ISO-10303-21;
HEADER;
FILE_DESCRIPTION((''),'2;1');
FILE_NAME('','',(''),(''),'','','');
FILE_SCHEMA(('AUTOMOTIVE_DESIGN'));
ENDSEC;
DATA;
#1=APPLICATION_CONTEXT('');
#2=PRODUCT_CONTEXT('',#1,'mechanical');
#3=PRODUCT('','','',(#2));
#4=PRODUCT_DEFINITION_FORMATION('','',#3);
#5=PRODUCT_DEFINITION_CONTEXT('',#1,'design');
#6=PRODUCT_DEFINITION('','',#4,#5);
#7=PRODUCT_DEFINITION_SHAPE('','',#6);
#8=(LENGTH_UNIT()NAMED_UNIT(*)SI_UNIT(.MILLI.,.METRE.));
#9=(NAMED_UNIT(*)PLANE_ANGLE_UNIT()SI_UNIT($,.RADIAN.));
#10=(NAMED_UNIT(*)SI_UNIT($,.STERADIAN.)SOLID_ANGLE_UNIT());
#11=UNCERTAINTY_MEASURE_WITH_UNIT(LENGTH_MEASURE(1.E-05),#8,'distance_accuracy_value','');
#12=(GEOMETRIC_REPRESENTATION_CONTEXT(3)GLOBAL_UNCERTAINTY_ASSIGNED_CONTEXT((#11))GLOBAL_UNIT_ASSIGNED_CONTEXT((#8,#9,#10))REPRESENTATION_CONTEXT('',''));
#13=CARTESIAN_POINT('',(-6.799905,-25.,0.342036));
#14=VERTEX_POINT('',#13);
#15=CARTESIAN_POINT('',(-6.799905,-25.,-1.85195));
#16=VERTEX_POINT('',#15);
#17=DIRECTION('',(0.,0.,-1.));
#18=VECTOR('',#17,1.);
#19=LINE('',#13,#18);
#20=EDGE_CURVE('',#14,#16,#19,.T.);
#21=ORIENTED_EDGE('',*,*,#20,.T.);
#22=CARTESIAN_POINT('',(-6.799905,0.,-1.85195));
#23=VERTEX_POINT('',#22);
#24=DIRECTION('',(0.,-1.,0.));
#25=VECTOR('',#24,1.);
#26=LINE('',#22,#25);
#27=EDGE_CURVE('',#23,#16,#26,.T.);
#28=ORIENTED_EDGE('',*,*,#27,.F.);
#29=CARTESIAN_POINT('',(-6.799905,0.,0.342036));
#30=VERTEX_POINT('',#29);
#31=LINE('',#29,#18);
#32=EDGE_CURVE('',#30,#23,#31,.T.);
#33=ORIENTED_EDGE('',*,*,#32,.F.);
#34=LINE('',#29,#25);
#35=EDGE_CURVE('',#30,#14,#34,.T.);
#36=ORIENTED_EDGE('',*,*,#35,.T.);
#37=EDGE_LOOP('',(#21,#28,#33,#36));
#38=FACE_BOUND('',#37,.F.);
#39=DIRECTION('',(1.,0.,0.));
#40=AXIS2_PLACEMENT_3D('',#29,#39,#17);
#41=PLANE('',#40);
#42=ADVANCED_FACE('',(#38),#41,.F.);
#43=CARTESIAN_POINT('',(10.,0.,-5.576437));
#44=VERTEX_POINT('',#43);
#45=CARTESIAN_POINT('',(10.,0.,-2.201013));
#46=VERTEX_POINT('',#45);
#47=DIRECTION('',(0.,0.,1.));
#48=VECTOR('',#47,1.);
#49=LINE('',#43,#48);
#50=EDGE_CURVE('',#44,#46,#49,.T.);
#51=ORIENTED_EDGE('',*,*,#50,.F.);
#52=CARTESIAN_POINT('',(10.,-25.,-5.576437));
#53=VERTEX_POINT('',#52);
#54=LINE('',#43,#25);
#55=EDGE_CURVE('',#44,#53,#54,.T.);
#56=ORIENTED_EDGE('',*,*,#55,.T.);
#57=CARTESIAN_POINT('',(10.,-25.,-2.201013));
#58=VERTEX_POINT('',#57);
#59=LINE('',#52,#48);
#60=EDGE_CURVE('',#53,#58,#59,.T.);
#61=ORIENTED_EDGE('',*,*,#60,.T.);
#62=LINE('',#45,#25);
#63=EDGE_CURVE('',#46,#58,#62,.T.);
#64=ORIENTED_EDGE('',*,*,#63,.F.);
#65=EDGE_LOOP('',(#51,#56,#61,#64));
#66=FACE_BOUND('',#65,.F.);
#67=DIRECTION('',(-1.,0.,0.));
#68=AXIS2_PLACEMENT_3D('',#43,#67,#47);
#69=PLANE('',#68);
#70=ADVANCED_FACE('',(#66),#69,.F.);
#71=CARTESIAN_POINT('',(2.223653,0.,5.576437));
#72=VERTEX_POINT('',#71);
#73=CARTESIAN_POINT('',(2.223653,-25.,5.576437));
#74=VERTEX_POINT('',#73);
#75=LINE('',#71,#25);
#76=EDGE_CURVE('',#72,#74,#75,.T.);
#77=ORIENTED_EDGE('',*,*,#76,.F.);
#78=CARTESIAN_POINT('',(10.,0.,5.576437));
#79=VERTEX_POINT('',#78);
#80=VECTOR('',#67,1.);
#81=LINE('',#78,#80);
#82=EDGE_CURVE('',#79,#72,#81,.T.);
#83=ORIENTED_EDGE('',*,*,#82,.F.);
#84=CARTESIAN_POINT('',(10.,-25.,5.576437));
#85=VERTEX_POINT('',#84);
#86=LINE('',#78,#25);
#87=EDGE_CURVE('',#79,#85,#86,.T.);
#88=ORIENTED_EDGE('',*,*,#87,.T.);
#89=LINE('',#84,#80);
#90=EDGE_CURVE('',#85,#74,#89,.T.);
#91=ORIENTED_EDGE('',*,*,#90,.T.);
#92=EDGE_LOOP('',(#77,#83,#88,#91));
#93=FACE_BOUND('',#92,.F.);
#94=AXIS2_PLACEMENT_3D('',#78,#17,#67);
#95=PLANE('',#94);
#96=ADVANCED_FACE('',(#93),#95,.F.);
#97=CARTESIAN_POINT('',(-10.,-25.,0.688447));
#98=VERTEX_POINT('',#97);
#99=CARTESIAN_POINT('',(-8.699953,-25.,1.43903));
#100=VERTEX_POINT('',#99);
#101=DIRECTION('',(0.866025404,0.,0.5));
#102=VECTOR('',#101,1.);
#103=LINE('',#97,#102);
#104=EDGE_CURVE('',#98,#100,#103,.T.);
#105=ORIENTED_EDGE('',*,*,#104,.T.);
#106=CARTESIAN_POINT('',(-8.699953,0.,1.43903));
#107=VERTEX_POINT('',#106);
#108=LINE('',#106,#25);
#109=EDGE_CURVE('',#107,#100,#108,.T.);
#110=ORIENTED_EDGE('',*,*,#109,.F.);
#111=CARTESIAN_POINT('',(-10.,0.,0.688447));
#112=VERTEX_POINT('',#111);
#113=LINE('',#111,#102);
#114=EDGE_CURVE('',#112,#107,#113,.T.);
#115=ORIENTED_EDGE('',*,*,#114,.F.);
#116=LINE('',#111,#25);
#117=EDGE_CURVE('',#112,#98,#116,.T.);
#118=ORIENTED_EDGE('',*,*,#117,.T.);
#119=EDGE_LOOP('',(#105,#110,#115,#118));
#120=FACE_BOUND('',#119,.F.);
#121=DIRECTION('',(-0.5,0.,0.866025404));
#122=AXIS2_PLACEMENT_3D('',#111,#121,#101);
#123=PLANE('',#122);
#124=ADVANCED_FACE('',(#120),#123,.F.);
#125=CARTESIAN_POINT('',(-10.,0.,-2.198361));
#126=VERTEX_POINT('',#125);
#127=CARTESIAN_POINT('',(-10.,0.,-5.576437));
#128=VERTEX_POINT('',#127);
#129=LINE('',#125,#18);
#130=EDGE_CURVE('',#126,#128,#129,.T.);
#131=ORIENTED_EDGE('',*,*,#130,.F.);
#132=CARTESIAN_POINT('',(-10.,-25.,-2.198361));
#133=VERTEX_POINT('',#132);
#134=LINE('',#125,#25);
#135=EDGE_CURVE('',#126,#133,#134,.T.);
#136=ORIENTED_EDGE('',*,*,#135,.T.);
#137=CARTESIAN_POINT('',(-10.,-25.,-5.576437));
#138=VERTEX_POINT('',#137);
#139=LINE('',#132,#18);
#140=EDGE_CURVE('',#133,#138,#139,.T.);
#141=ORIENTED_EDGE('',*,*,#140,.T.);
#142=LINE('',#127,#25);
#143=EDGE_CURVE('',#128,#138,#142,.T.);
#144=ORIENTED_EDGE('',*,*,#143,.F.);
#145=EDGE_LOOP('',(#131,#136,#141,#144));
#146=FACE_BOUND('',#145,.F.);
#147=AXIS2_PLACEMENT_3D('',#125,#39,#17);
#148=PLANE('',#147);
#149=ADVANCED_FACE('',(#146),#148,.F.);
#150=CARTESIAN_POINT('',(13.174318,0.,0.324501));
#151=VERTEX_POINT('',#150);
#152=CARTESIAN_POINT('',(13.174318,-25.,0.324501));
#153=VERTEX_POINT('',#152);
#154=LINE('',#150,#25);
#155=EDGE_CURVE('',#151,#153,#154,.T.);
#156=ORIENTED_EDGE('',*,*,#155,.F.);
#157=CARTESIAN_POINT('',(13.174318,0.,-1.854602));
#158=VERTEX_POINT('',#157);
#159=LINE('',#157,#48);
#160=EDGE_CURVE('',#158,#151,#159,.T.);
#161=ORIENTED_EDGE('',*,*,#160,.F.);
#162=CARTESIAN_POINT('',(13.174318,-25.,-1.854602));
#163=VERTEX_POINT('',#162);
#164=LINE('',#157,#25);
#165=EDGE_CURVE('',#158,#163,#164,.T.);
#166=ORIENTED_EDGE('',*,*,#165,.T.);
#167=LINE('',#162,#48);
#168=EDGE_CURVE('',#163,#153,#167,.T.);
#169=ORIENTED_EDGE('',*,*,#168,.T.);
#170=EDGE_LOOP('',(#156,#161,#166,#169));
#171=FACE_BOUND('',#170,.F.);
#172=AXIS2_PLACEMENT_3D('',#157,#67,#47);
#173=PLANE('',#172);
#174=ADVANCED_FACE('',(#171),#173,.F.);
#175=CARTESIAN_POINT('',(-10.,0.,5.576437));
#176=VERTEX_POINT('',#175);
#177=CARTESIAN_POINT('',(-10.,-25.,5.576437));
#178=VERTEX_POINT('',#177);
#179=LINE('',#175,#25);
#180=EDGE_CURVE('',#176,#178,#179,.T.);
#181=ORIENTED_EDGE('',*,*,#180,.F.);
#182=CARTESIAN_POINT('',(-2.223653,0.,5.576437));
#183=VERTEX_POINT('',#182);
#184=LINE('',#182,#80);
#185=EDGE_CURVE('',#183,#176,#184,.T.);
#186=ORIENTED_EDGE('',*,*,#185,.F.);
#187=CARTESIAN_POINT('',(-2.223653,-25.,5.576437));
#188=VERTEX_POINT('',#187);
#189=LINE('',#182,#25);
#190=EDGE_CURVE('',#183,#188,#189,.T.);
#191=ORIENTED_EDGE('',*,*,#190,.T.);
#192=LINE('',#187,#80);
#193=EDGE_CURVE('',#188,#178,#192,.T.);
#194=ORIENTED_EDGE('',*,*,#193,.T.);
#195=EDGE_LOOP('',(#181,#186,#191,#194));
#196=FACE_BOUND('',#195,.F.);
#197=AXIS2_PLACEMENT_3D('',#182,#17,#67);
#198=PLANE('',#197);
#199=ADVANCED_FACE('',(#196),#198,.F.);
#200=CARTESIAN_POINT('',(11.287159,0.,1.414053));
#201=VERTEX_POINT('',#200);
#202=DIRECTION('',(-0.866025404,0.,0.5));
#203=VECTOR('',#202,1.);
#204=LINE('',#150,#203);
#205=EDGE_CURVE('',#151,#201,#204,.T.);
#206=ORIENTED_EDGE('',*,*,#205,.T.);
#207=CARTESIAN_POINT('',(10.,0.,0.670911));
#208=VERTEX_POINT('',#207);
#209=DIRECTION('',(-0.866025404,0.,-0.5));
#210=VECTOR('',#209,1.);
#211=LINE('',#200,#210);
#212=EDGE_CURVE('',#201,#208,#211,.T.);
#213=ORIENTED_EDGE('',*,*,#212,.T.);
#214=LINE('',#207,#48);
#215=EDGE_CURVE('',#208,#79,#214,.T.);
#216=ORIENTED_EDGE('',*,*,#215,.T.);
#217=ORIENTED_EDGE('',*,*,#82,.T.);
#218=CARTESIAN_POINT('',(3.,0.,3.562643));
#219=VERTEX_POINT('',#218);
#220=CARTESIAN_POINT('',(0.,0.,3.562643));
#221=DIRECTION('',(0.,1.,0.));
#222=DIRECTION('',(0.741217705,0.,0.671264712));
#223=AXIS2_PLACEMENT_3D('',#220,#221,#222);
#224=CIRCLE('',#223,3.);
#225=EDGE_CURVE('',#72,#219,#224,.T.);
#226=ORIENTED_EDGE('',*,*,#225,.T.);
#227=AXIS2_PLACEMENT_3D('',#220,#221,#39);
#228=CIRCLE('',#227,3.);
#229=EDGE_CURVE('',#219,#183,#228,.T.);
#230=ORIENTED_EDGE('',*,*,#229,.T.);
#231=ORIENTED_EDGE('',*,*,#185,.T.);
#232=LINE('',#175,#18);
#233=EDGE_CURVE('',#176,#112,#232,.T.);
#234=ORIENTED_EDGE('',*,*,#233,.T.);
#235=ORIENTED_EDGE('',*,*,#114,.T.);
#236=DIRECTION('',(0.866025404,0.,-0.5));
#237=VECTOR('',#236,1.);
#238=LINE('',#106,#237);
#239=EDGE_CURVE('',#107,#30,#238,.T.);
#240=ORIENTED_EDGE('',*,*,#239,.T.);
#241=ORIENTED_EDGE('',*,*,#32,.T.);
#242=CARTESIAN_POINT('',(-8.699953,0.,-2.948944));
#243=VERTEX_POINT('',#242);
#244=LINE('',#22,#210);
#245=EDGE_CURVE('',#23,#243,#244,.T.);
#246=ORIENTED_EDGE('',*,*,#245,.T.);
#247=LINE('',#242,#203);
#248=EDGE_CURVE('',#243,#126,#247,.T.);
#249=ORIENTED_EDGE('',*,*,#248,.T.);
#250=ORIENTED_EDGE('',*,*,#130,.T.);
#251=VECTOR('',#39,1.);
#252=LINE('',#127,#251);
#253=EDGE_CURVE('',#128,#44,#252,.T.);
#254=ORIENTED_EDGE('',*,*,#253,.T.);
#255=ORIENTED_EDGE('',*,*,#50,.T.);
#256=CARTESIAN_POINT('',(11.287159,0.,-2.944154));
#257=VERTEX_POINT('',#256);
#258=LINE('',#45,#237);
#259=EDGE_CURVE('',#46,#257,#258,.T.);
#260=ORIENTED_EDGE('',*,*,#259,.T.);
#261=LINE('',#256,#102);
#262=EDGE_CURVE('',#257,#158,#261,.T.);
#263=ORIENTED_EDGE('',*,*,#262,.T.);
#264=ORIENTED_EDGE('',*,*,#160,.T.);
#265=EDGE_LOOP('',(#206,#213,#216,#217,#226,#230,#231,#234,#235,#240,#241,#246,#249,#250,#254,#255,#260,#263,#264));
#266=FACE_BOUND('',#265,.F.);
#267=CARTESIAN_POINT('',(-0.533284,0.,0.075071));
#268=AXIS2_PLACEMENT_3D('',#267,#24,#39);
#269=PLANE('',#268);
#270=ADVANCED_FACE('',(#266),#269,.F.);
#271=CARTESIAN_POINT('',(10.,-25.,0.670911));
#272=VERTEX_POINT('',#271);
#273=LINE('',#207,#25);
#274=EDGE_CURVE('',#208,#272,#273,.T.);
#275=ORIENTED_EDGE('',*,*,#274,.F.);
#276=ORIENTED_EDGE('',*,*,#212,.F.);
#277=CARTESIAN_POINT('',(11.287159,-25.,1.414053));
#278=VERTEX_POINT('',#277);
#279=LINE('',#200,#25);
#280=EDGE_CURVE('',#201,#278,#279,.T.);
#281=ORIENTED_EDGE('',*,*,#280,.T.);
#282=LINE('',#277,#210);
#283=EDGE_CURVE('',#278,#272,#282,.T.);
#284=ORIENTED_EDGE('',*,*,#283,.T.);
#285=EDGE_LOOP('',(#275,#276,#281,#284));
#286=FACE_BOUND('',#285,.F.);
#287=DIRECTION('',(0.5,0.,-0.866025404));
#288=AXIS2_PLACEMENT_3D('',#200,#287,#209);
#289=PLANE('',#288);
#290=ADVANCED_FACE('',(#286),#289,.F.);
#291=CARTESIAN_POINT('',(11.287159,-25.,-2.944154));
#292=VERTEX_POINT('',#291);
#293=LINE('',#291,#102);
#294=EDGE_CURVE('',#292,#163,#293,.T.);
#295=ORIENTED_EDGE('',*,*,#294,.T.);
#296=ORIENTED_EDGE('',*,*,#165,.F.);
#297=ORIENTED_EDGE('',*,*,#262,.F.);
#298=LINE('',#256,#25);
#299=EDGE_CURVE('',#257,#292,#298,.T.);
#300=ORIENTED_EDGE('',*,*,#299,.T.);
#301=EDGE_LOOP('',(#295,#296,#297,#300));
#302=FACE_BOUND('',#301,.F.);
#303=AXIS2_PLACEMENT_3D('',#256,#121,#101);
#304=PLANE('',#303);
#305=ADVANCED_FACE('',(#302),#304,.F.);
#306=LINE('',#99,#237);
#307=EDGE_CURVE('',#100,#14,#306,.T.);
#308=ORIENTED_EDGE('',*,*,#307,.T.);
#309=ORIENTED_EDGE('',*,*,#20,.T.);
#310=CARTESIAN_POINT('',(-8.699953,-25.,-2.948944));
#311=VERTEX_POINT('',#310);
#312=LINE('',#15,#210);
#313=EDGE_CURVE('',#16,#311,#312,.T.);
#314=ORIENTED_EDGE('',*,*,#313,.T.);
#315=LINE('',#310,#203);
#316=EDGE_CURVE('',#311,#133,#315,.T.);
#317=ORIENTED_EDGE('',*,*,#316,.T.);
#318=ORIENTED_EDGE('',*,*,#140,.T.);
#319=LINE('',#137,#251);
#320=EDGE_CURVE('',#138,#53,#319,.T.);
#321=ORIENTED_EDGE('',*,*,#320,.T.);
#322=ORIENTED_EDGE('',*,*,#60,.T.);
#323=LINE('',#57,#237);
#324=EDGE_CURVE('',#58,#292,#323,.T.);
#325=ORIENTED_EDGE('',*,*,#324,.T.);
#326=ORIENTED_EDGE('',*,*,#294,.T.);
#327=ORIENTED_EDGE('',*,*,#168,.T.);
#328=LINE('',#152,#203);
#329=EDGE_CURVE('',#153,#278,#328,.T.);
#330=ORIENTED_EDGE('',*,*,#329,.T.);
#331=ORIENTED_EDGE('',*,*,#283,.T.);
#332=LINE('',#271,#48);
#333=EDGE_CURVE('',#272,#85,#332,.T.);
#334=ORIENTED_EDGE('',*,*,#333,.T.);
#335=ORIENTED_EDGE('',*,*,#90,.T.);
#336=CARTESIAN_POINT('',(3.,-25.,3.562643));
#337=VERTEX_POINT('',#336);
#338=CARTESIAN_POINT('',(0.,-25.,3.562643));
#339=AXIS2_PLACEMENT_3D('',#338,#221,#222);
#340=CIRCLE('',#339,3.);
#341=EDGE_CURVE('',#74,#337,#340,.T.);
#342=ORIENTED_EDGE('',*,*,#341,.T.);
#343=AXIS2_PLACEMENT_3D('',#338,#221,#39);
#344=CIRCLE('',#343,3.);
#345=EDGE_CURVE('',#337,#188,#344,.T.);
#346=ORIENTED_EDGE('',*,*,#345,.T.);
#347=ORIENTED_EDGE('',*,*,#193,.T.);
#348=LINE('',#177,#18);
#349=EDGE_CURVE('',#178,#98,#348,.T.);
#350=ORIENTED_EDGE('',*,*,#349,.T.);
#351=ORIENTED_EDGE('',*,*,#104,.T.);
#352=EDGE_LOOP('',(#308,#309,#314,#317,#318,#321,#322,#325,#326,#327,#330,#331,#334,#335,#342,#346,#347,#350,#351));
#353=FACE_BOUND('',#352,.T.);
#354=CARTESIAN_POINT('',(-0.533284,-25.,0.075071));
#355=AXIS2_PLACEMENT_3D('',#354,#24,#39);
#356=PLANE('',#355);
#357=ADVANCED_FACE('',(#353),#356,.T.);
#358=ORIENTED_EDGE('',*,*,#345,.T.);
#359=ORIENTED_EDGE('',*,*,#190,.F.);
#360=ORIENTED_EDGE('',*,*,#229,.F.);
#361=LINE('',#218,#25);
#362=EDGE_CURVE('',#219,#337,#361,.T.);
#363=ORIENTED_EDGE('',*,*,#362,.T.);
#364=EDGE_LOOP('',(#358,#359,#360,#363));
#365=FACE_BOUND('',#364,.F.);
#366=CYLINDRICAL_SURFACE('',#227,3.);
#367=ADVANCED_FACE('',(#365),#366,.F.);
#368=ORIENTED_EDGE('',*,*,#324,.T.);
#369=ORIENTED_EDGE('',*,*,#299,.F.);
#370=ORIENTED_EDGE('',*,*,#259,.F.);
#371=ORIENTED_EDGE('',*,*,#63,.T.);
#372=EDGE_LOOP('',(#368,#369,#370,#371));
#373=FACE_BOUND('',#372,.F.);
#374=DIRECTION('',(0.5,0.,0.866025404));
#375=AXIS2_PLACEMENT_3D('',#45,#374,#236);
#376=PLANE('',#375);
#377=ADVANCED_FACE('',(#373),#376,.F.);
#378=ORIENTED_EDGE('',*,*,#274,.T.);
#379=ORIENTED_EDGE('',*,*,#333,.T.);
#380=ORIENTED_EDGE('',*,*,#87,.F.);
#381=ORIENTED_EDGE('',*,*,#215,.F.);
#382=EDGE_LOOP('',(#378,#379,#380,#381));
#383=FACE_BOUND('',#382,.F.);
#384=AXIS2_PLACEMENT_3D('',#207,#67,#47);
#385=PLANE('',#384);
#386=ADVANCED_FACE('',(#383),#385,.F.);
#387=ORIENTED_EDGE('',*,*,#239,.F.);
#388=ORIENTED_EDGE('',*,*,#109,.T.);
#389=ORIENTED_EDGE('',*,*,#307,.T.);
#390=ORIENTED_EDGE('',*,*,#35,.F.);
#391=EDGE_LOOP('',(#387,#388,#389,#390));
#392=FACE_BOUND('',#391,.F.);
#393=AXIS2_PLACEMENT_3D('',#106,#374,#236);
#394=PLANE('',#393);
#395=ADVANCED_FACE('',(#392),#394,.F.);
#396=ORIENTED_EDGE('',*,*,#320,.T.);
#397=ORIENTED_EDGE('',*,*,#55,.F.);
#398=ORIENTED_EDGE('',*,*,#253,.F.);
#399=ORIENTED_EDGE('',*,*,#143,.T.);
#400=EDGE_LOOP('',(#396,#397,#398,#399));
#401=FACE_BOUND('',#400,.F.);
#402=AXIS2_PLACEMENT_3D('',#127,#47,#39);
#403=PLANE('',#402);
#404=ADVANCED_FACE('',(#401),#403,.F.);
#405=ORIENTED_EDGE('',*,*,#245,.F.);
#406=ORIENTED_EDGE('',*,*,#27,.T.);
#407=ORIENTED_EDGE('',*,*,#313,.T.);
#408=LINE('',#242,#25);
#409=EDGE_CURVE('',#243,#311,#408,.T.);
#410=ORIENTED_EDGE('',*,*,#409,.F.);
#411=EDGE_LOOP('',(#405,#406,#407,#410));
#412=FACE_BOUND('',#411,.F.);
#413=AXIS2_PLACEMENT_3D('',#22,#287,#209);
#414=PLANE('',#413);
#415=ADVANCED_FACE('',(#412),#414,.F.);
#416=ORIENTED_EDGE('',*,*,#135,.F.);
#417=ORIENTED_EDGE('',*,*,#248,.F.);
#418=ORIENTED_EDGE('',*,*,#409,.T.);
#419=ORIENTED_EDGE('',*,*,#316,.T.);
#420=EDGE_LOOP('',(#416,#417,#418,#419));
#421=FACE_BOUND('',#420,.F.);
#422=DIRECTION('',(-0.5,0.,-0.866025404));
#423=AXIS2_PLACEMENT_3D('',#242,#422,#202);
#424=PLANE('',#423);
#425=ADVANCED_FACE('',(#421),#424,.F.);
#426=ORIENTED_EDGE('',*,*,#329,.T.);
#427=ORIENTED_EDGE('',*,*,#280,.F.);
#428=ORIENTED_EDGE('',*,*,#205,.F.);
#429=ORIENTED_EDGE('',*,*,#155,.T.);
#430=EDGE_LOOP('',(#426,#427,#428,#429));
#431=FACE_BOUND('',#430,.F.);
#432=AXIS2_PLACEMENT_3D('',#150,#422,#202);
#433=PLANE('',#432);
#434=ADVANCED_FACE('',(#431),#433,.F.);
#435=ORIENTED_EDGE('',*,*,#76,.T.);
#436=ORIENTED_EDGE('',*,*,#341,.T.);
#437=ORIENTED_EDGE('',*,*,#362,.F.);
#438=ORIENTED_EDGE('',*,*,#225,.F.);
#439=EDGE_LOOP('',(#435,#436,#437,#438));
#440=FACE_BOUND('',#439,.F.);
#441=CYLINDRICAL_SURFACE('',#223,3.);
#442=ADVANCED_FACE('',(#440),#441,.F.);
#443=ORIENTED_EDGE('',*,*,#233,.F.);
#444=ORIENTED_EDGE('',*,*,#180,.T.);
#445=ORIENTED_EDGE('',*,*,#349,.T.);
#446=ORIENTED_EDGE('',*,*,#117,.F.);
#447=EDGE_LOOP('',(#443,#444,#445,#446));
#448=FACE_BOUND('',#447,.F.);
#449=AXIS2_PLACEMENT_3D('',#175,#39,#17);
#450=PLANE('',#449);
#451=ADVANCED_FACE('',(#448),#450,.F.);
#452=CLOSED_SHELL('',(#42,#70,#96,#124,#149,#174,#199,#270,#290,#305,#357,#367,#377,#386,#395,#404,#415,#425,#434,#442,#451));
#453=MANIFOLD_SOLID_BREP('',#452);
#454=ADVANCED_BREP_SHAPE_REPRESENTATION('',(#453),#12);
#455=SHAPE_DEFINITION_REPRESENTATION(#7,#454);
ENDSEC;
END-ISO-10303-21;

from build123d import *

# Parameters (mm, degrees)
F1_DEPTH = 25


# Not quite as in the source:
# - a feature names something its author has since deleted; it is built from what else it names


with BuildPart() as f1:
    # F0 (on Front) → F1 (new body)
    with BuildSketch(Plane.XZ):
        with BuildLine():
            Line((-10, -5.576437097), (10, -5.576437097))
            Line((10, -5.576437097), (10, -2.201012618))
            Line((10, -2.201012618), (9.4, -1.8546024565))
            Line((9.4, -1.8546024565), (9.4, 0.3245011641))
            Line((9.4, 0.3245011641), (10, 0.6709113256))
            Line((10, 0.6709113256), (10, 5.576437097))
            Line((10, 5.576437097), (2.2236531144, 5.576437097))
            ThreePointArc((2.2236531144, 5.576437097), (2.7991926821, 4.6417723907), (3, 3.5626429599))
            ThreePointArc((3, 3.5626429599), (-1.0791294308, 0.7634502778), (-2.2236531144, 5.576437097))
            Line((-2.2236531144, 5.576437097), (-10, 5.576437097))
            Line((-10, 5.576437097), (-10, 0.6884473353))
            Line((-10, 0.6884473353), (-8.6999533325, 1.4390296287))
            Line((-8.6999533325, 1.4390296287), (-6.7999051139, 0.3420362782))
            Line((-6.7999051139, 0.3420362782), (-6.7999051139, -1.8519504229))
            Line((-6.7999051139, -1.8519504229), (-8.6999533325, -2.9489437734))
            Line((-8.6999533325, -2.9489437734), (-10, -2.19836148))
            Line((-10, -2.19836148), (-10, -5.576437097))
        make_face()
        Polygon((10, 0.6709113256), (10, -2.201012618), (11.2871590928, -2.9441542667), (13.1743181857, -1.8546024565), (13.1743181857, 0.3245011641), (11.2871590928, 1.4140529743), align=None)
        Polygon((9.4, -1.8546024565), (10, -2.201012618), (10, 0.6709113256), (9.4, 0.3245011641), align=None)
    extrude(amount=F1_DEPTH)


solid = f1.part
